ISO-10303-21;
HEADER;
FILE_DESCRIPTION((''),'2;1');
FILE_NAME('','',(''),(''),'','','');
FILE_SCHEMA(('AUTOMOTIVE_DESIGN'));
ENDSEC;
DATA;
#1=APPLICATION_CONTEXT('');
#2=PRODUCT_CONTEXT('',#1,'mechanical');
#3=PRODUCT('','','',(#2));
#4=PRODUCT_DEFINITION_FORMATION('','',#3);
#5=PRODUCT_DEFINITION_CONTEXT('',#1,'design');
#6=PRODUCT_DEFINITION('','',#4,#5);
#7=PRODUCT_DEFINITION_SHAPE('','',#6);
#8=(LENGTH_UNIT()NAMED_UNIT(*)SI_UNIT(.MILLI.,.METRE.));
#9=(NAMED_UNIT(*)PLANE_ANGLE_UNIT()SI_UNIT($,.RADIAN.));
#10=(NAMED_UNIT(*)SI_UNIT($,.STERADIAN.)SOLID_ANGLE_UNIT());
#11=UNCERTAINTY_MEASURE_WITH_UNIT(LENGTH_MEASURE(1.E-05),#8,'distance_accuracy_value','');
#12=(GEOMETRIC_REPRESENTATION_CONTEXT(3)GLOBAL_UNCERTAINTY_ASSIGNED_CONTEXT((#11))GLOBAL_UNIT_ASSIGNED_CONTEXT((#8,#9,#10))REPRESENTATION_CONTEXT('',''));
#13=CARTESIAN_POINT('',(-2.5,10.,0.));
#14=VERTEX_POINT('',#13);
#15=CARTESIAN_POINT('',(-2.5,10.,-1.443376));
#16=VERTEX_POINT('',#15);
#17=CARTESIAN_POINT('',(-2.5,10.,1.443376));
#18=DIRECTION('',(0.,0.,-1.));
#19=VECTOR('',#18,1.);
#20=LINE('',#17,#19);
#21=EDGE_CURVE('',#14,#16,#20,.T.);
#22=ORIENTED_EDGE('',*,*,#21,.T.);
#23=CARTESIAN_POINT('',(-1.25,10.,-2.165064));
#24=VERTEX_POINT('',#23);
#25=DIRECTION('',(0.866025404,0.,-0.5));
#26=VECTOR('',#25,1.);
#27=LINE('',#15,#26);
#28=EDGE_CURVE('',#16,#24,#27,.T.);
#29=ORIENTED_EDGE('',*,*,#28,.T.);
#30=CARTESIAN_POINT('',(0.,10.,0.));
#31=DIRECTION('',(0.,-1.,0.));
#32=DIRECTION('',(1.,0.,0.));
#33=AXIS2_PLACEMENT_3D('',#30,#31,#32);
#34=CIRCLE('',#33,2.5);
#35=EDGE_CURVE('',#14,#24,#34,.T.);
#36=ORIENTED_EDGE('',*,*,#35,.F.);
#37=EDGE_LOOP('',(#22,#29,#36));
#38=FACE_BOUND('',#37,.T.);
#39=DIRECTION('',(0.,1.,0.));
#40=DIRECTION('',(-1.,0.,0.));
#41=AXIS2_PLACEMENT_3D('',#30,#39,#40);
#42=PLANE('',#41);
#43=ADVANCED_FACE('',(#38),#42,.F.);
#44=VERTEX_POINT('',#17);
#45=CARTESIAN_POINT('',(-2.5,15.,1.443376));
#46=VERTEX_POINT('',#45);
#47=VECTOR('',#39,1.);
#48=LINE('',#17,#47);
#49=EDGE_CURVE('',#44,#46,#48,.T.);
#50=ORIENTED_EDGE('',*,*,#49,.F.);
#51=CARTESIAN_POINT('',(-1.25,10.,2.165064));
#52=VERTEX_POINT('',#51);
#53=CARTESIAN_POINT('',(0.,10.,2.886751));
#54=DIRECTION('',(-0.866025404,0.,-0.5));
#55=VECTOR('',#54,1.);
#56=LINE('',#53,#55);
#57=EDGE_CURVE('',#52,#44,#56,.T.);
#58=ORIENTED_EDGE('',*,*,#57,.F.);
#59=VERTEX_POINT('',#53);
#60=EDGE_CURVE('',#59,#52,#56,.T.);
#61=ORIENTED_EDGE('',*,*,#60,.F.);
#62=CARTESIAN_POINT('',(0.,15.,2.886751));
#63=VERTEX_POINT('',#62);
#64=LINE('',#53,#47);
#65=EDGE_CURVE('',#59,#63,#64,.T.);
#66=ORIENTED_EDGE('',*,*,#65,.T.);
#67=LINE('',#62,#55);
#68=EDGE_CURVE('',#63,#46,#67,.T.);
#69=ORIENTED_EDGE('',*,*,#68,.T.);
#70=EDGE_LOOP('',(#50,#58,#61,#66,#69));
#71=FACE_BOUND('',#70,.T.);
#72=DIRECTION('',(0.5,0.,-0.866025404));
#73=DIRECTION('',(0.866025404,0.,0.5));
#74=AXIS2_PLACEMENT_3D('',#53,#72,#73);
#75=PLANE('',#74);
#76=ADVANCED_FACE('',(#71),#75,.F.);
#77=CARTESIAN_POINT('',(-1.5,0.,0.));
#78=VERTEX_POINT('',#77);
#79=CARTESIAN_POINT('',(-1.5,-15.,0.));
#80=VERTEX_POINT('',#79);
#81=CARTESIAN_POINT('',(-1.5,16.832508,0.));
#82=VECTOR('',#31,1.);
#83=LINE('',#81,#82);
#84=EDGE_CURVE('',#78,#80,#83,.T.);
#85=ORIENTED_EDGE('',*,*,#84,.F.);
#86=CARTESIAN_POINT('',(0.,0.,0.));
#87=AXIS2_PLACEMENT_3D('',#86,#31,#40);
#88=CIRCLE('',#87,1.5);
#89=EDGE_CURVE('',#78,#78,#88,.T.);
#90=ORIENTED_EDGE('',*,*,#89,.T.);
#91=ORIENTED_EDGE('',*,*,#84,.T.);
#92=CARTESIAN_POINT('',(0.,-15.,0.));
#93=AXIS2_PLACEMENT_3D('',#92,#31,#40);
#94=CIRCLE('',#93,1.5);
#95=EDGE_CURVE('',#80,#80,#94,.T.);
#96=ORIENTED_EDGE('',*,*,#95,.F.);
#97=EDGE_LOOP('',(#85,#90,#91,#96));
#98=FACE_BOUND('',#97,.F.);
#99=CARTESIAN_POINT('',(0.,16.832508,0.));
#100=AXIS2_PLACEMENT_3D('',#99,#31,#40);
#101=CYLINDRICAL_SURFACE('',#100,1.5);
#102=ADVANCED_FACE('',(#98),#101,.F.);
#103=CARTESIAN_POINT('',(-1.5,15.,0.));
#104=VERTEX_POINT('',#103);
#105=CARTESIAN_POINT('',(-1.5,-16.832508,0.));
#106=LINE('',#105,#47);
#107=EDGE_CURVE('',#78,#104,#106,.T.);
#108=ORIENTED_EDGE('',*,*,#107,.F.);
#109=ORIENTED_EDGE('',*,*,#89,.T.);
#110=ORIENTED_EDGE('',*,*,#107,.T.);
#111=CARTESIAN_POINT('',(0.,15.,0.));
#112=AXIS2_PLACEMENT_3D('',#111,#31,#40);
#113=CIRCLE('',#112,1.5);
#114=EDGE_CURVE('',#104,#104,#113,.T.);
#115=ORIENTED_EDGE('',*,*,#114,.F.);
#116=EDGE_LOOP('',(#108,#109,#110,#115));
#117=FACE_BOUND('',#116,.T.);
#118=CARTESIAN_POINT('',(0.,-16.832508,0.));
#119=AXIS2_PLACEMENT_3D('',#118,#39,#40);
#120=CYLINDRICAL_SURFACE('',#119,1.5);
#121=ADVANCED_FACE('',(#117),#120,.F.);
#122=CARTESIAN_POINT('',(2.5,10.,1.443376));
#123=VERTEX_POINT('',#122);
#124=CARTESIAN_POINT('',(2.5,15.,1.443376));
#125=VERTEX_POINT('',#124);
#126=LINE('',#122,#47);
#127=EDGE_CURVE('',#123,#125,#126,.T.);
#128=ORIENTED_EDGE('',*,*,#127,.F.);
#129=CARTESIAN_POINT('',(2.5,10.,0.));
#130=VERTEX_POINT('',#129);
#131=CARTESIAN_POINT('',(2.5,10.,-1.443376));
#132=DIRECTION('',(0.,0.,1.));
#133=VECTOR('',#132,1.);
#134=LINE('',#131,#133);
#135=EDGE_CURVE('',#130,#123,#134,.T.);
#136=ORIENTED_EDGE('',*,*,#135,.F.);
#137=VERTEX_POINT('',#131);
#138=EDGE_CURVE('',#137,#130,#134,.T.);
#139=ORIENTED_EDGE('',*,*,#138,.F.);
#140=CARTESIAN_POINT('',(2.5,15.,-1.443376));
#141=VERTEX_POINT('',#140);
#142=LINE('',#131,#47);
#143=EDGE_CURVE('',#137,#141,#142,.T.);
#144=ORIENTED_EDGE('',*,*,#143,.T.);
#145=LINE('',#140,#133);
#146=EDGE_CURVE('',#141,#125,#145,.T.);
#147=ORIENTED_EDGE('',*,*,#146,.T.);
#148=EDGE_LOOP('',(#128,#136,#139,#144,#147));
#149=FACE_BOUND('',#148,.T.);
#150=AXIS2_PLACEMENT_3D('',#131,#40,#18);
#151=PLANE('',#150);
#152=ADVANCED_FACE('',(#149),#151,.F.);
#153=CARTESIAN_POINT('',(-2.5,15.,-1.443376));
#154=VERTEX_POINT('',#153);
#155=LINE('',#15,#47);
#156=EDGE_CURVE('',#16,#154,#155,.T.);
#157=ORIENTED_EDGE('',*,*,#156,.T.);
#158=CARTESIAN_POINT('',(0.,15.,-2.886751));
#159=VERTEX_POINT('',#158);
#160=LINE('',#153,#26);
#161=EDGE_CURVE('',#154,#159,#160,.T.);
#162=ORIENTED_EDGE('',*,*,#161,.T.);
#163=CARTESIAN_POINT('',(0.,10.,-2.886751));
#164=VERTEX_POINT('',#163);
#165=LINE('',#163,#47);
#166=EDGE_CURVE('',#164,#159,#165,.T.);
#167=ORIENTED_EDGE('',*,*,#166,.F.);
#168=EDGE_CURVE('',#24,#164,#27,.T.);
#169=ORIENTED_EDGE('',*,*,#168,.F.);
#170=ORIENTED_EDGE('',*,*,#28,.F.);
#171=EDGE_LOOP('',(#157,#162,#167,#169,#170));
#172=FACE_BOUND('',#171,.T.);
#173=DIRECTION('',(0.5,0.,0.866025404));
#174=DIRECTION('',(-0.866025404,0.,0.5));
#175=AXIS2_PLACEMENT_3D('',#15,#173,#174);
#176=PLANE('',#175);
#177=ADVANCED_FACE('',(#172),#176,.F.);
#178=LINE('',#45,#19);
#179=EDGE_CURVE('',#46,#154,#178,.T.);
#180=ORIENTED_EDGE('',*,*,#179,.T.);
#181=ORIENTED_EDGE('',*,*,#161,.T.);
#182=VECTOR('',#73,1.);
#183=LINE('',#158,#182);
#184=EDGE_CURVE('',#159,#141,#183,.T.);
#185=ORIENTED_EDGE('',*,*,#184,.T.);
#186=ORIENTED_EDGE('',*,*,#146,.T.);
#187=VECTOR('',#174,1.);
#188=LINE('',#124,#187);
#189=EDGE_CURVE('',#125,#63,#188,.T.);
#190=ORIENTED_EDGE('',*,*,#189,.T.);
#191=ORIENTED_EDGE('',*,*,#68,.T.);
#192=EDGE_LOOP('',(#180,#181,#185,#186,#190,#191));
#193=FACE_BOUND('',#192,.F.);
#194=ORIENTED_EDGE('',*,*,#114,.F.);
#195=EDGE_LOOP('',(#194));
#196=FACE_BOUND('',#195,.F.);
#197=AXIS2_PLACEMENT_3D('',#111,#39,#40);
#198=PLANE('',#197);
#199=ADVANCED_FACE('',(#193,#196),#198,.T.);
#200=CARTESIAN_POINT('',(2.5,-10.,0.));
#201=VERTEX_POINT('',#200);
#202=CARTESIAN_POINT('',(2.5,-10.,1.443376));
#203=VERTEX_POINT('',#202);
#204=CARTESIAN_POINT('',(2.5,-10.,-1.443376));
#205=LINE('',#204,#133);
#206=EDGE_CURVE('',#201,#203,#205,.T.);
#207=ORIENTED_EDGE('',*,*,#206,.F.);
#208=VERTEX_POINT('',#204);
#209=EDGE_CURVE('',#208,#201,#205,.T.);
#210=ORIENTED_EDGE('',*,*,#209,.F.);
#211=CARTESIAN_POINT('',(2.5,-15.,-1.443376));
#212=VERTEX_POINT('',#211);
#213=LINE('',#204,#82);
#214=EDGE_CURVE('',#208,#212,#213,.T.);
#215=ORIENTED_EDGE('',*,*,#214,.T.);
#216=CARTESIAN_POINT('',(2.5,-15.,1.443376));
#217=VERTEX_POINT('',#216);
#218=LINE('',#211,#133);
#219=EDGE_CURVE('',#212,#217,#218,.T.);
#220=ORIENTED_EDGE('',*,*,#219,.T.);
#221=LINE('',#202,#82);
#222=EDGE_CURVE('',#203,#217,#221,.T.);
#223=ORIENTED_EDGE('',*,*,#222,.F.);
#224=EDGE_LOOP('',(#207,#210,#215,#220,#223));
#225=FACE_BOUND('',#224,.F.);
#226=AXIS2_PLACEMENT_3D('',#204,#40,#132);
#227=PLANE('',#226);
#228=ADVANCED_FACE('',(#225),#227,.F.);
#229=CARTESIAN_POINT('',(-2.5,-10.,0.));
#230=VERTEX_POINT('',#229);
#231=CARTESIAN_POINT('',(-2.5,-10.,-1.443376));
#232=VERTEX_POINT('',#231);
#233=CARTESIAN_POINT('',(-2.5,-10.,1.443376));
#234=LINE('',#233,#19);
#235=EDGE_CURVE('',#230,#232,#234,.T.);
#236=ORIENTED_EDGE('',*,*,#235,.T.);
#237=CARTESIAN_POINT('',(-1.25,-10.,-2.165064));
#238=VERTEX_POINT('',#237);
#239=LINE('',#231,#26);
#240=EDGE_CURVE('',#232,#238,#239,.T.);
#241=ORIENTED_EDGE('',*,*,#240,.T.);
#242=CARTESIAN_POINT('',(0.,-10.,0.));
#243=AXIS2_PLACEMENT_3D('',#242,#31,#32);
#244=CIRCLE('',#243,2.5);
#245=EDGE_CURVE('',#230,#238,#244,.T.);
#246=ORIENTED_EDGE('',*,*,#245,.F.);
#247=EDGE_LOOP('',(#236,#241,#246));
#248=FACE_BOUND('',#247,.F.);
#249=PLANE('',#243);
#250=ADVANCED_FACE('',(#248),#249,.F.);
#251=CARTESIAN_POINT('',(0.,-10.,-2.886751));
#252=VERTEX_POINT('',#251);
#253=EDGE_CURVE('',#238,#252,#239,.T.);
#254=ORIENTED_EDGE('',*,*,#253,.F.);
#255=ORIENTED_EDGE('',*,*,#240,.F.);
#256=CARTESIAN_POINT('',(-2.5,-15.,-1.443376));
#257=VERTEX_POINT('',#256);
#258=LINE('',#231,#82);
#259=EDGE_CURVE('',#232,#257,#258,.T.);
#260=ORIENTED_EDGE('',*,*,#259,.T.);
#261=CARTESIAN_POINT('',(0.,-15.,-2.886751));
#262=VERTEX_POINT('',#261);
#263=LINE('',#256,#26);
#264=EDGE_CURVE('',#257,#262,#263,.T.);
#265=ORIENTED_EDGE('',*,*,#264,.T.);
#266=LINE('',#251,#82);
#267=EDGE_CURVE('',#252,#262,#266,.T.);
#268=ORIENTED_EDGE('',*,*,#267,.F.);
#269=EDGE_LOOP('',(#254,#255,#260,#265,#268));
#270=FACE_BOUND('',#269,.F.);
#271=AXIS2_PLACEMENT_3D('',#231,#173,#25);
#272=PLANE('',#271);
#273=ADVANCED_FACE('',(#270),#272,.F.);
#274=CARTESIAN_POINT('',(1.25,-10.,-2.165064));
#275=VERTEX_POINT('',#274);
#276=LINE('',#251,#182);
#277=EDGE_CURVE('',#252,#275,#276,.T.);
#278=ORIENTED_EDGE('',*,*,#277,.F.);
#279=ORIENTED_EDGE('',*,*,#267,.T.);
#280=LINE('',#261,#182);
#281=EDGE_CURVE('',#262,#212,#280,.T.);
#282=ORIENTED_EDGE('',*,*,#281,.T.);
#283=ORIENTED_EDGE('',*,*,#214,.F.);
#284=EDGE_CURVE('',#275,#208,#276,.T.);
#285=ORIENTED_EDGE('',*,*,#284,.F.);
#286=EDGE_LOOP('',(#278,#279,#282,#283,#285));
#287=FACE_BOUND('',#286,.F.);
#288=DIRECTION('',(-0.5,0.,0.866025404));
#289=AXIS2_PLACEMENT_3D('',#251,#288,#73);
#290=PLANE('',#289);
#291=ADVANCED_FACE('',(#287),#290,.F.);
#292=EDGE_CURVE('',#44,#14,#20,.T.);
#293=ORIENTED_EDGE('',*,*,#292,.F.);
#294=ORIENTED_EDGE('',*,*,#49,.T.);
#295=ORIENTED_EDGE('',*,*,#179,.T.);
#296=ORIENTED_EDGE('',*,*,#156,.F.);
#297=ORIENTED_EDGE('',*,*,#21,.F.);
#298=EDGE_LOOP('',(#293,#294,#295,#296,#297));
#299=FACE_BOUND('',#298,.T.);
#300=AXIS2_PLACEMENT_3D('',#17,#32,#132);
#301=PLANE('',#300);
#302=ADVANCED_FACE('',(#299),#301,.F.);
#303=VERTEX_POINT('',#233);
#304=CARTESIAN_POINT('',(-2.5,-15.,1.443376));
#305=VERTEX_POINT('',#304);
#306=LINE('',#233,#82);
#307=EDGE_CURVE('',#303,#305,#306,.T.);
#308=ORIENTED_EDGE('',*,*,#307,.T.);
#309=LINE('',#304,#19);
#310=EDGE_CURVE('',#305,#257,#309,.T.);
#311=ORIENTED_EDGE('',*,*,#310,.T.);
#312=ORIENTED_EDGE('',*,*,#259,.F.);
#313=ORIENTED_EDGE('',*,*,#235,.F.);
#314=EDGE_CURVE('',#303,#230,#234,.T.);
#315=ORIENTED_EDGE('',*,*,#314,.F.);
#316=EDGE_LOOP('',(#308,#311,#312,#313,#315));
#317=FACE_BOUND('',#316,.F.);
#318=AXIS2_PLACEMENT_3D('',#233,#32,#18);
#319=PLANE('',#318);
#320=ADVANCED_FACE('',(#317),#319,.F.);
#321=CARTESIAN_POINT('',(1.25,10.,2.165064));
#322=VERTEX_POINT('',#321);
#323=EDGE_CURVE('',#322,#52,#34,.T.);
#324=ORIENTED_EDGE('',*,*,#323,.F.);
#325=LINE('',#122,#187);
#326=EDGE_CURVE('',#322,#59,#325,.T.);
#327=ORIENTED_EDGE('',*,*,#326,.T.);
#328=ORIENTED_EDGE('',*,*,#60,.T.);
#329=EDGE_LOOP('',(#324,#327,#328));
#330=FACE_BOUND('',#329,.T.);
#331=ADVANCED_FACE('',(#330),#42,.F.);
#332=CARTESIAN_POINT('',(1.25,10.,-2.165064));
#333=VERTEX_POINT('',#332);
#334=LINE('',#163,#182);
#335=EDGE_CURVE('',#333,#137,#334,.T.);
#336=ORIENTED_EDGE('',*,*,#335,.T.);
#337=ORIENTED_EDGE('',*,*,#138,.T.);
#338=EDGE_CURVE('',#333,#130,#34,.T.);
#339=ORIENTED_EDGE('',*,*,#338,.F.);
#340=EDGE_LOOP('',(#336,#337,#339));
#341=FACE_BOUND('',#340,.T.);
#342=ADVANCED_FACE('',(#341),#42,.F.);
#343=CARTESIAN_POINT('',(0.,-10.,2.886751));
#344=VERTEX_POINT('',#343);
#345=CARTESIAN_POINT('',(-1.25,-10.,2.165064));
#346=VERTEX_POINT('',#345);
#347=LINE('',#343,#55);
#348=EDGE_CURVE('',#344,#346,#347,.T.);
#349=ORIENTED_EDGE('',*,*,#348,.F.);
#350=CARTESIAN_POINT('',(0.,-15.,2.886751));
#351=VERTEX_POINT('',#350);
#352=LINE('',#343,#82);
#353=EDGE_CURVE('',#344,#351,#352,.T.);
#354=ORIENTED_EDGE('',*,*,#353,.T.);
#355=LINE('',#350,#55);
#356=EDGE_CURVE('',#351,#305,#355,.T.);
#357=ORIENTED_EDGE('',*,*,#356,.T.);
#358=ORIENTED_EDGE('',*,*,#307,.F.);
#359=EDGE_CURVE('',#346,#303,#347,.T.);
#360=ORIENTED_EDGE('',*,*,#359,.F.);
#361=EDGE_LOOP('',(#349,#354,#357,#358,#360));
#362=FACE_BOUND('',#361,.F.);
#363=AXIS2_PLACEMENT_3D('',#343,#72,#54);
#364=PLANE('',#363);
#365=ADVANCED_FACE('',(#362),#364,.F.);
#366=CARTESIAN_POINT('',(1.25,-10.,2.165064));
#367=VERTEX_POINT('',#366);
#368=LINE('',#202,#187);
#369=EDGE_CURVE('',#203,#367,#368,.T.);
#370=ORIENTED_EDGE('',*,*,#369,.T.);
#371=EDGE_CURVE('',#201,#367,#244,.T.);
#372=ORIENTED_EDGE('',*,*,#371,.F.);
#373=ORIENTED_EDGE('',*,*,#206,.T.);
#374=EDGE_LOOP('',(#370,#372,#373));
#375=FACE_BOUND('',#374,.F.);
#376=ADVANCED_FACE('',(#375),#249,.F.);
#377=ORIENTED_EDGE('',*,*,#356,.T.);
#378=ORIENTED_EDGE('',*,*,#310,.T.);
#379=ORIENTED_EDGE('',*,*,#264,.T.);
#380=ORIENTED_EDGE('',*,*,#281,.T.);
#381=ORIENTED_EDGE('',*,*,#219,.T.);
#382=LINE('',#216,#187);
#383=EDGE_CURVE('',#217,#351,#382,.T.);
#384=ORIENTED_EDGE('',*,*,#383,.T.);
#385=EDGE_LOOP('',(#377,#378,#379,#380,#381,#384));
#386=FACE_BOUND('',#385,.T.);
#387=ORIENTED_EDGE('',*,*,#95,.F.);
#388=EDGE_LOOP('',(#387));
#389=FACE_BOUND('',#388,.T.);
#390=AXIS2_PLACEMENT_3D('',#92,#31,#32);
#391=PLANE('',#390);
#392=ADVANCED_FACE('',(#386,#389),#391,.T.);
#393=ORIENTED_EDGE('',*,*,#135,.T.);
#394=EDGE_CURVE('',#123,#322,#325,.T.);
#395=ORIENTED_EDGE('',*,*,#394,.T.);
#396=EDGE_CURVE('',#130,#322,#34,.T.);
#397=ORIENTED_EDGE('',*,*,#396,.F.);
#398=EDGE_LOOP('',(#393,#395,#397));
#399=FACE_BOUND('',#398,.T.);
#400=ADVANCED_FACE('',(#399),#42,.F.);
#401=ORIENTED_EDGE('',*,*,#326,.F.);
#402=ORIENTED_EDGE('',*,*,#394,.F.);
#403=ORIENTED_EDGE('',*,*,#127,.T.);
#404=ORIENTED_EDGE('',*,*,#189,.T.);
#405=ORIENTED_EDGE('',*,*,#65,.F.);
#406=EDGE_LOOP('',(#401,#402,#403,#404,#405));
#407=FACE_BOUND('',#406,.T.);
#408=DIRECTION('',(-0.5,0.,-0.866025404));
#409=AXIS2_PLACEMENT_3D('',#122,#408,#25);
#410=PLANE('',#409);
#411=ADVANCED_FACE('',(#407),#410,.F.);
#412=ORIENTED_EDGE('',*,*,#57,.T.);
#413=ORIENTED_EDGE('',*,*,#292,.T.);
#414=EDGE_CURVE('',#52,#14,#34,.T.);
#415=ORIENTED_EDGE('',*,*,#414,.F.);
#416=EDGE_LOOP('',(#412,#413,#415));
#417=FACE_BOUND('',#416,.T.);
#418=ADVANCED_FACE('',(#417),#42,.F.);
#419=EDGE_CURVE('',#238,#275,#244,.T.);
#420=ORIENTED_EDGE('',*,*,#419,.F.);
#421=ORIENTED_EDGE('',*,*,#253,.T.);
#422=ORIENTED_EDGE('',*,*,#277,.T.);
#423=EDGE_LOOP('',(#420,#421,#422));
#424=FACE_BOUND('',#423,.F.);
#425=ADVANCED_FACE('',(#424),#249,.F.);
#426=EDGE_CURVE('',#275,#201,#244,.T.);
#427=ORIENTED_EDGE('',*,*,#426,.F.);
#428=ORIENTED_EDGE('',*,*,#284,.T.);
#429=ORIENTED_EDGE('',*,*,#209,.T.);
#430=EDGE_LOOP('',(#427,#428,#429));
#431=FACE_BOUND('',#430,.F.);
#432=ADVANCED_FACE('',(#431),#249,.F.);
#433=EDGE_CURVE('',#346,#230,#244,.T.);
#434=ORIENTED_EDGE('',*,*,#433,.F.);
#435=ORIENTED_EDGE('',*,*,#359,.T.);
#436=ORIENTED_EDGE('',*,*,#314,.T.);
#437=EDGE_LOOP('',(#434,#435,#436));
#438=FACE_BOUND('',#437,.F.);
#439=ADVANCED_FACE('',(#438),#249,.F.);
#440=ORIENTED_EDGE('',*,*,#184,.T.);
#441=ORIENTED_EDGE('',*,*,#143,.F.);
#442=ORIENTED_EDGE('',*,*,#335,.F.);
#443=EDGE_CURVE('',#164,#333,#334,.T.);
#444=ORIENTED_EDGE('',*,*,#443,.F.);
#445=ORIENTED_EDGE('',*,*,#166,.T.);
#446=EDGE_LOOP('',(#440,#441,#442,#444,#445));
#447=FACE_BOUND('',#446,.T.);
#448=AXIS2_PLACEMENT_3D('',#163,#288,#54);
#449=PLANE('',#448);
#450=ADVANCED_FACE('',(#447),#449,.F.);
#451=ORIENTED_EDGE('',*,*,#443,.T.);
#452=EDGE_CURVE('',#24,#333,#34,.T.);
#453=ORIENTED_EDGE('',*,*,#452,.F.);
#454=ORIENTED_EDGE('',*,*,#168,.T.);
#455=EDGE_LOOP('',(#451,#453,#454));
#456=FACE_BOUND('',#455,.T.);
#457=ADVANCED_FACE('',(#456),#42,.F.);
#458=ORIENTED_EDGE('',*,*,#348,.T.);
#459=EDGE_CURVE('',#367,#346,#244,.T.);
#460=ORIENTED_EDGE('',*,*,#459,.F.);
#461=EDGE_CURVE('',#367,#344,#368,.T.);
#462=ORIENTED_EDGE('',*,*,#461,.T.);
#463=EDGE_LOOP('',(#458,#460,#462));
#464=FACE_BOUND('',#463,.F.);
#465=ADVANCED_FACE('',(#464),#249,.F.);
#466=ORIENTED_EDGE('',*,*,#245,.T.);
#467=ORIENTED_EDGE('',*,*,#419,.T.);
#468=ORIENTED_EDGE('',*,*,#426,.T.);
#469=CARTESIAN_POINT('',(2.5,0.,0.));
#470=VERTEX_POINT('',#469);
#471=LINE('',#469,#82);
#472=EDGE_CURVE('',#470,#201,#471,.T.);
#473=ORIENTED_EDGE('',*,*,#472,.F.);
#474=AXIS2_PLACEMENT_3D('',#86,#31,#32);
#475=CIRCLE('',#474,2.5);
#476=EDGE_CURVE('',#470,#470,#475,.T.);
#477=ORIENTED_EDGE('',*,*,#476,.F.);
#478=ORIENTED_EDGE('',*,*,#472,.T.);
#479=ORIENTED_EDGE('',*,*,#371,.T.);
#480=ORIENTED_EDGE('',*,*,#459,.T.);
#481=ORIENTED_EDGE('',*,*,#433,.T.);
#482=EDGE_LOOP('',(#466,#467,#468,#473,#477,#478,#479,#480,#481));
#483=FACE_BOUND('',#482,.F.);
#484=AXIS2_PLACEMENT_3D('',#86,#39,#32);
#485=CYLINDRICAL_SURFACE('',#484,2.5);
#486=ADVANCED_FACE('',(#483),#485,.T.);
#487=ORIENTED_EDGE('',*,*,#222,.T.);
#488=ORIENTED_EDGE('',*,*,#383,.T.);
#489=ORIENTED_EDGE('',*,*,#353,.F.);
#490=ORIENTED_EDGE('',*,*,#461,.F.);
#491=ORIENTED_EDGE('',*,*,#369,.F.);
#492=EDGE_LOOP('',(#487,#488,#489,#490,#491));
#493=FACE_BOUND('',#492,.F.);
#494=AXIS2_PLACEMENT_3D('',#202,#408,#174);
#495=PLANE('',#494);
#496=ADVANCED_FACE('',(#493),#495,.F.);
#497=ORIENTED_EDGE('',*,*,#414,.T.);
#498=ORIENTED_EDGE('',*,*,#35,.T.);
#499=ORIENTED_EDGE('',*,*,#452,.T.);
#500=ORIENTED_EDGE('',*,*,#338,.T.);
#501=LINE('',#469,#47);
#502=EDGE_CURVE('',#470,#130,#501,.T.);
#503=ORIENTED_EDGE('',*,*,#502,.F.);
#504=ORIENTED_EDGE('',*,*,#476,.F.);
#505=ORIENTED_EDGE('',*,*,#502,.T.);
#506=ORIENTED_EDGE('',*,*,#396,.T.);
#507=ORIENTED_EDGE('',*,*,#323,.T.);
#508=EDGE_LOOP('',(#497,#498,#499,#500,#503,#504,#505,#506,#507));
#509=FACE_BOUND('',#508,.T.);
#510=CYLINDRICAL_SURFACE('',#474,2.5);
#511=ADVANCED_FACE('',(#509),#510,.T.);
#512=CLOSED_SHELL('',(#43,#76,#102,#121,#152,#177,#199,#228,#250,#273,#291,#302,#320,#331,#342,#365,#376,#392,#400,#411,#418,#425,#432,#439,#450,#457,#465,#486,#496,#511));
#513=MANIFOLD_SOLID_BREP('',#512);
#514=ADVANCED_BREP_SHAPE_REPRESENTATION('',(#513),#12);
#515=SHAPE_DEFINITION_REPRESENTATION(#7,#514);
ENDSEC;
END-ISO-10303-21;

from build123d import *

# Parameters (mm, degrees)
F1_R     = 2.5
F2_DEPTH = 10
F4_DEPTH = 5
F5_D     = 3


# Not quite as in the source:
# - a feature names something its author has since deleted; it is built from what else it names


with BuildPart() as f2:
    # F1 (on Front) → F2 (new body)
    with BuildSketch(Plane.XZ):
        Circle(F1_R)
    extrude(amount=F2_DEPTH)

    # F3 (on face) → F4 (join)
    with BuildSketch(Plane.XZ.offset(10)):
        Polygon((-2.5, 1.443375673), (-2.5, -1.443375673), (0, -2.8867513459), (2.5, -1.443375673), (2.5, 1.443375673), (0, 2.8867513459), align=None)
    extrude(amount=F4_DEPTH)

    # F5 (through all)
    with Locations(Plane(origin=(0, 0, 0), x_dir=(1, 0, 0), z_dir=(0, 1, 0))):
        with Locations((0, 0)):
            Hole(F5_D / 2)

    # F6: F2 across face


with BuildPart() as f2_1:
    add(f2.part)
    add(f2.part.mirror(Plane.XZ))


solid = f2_1.part
